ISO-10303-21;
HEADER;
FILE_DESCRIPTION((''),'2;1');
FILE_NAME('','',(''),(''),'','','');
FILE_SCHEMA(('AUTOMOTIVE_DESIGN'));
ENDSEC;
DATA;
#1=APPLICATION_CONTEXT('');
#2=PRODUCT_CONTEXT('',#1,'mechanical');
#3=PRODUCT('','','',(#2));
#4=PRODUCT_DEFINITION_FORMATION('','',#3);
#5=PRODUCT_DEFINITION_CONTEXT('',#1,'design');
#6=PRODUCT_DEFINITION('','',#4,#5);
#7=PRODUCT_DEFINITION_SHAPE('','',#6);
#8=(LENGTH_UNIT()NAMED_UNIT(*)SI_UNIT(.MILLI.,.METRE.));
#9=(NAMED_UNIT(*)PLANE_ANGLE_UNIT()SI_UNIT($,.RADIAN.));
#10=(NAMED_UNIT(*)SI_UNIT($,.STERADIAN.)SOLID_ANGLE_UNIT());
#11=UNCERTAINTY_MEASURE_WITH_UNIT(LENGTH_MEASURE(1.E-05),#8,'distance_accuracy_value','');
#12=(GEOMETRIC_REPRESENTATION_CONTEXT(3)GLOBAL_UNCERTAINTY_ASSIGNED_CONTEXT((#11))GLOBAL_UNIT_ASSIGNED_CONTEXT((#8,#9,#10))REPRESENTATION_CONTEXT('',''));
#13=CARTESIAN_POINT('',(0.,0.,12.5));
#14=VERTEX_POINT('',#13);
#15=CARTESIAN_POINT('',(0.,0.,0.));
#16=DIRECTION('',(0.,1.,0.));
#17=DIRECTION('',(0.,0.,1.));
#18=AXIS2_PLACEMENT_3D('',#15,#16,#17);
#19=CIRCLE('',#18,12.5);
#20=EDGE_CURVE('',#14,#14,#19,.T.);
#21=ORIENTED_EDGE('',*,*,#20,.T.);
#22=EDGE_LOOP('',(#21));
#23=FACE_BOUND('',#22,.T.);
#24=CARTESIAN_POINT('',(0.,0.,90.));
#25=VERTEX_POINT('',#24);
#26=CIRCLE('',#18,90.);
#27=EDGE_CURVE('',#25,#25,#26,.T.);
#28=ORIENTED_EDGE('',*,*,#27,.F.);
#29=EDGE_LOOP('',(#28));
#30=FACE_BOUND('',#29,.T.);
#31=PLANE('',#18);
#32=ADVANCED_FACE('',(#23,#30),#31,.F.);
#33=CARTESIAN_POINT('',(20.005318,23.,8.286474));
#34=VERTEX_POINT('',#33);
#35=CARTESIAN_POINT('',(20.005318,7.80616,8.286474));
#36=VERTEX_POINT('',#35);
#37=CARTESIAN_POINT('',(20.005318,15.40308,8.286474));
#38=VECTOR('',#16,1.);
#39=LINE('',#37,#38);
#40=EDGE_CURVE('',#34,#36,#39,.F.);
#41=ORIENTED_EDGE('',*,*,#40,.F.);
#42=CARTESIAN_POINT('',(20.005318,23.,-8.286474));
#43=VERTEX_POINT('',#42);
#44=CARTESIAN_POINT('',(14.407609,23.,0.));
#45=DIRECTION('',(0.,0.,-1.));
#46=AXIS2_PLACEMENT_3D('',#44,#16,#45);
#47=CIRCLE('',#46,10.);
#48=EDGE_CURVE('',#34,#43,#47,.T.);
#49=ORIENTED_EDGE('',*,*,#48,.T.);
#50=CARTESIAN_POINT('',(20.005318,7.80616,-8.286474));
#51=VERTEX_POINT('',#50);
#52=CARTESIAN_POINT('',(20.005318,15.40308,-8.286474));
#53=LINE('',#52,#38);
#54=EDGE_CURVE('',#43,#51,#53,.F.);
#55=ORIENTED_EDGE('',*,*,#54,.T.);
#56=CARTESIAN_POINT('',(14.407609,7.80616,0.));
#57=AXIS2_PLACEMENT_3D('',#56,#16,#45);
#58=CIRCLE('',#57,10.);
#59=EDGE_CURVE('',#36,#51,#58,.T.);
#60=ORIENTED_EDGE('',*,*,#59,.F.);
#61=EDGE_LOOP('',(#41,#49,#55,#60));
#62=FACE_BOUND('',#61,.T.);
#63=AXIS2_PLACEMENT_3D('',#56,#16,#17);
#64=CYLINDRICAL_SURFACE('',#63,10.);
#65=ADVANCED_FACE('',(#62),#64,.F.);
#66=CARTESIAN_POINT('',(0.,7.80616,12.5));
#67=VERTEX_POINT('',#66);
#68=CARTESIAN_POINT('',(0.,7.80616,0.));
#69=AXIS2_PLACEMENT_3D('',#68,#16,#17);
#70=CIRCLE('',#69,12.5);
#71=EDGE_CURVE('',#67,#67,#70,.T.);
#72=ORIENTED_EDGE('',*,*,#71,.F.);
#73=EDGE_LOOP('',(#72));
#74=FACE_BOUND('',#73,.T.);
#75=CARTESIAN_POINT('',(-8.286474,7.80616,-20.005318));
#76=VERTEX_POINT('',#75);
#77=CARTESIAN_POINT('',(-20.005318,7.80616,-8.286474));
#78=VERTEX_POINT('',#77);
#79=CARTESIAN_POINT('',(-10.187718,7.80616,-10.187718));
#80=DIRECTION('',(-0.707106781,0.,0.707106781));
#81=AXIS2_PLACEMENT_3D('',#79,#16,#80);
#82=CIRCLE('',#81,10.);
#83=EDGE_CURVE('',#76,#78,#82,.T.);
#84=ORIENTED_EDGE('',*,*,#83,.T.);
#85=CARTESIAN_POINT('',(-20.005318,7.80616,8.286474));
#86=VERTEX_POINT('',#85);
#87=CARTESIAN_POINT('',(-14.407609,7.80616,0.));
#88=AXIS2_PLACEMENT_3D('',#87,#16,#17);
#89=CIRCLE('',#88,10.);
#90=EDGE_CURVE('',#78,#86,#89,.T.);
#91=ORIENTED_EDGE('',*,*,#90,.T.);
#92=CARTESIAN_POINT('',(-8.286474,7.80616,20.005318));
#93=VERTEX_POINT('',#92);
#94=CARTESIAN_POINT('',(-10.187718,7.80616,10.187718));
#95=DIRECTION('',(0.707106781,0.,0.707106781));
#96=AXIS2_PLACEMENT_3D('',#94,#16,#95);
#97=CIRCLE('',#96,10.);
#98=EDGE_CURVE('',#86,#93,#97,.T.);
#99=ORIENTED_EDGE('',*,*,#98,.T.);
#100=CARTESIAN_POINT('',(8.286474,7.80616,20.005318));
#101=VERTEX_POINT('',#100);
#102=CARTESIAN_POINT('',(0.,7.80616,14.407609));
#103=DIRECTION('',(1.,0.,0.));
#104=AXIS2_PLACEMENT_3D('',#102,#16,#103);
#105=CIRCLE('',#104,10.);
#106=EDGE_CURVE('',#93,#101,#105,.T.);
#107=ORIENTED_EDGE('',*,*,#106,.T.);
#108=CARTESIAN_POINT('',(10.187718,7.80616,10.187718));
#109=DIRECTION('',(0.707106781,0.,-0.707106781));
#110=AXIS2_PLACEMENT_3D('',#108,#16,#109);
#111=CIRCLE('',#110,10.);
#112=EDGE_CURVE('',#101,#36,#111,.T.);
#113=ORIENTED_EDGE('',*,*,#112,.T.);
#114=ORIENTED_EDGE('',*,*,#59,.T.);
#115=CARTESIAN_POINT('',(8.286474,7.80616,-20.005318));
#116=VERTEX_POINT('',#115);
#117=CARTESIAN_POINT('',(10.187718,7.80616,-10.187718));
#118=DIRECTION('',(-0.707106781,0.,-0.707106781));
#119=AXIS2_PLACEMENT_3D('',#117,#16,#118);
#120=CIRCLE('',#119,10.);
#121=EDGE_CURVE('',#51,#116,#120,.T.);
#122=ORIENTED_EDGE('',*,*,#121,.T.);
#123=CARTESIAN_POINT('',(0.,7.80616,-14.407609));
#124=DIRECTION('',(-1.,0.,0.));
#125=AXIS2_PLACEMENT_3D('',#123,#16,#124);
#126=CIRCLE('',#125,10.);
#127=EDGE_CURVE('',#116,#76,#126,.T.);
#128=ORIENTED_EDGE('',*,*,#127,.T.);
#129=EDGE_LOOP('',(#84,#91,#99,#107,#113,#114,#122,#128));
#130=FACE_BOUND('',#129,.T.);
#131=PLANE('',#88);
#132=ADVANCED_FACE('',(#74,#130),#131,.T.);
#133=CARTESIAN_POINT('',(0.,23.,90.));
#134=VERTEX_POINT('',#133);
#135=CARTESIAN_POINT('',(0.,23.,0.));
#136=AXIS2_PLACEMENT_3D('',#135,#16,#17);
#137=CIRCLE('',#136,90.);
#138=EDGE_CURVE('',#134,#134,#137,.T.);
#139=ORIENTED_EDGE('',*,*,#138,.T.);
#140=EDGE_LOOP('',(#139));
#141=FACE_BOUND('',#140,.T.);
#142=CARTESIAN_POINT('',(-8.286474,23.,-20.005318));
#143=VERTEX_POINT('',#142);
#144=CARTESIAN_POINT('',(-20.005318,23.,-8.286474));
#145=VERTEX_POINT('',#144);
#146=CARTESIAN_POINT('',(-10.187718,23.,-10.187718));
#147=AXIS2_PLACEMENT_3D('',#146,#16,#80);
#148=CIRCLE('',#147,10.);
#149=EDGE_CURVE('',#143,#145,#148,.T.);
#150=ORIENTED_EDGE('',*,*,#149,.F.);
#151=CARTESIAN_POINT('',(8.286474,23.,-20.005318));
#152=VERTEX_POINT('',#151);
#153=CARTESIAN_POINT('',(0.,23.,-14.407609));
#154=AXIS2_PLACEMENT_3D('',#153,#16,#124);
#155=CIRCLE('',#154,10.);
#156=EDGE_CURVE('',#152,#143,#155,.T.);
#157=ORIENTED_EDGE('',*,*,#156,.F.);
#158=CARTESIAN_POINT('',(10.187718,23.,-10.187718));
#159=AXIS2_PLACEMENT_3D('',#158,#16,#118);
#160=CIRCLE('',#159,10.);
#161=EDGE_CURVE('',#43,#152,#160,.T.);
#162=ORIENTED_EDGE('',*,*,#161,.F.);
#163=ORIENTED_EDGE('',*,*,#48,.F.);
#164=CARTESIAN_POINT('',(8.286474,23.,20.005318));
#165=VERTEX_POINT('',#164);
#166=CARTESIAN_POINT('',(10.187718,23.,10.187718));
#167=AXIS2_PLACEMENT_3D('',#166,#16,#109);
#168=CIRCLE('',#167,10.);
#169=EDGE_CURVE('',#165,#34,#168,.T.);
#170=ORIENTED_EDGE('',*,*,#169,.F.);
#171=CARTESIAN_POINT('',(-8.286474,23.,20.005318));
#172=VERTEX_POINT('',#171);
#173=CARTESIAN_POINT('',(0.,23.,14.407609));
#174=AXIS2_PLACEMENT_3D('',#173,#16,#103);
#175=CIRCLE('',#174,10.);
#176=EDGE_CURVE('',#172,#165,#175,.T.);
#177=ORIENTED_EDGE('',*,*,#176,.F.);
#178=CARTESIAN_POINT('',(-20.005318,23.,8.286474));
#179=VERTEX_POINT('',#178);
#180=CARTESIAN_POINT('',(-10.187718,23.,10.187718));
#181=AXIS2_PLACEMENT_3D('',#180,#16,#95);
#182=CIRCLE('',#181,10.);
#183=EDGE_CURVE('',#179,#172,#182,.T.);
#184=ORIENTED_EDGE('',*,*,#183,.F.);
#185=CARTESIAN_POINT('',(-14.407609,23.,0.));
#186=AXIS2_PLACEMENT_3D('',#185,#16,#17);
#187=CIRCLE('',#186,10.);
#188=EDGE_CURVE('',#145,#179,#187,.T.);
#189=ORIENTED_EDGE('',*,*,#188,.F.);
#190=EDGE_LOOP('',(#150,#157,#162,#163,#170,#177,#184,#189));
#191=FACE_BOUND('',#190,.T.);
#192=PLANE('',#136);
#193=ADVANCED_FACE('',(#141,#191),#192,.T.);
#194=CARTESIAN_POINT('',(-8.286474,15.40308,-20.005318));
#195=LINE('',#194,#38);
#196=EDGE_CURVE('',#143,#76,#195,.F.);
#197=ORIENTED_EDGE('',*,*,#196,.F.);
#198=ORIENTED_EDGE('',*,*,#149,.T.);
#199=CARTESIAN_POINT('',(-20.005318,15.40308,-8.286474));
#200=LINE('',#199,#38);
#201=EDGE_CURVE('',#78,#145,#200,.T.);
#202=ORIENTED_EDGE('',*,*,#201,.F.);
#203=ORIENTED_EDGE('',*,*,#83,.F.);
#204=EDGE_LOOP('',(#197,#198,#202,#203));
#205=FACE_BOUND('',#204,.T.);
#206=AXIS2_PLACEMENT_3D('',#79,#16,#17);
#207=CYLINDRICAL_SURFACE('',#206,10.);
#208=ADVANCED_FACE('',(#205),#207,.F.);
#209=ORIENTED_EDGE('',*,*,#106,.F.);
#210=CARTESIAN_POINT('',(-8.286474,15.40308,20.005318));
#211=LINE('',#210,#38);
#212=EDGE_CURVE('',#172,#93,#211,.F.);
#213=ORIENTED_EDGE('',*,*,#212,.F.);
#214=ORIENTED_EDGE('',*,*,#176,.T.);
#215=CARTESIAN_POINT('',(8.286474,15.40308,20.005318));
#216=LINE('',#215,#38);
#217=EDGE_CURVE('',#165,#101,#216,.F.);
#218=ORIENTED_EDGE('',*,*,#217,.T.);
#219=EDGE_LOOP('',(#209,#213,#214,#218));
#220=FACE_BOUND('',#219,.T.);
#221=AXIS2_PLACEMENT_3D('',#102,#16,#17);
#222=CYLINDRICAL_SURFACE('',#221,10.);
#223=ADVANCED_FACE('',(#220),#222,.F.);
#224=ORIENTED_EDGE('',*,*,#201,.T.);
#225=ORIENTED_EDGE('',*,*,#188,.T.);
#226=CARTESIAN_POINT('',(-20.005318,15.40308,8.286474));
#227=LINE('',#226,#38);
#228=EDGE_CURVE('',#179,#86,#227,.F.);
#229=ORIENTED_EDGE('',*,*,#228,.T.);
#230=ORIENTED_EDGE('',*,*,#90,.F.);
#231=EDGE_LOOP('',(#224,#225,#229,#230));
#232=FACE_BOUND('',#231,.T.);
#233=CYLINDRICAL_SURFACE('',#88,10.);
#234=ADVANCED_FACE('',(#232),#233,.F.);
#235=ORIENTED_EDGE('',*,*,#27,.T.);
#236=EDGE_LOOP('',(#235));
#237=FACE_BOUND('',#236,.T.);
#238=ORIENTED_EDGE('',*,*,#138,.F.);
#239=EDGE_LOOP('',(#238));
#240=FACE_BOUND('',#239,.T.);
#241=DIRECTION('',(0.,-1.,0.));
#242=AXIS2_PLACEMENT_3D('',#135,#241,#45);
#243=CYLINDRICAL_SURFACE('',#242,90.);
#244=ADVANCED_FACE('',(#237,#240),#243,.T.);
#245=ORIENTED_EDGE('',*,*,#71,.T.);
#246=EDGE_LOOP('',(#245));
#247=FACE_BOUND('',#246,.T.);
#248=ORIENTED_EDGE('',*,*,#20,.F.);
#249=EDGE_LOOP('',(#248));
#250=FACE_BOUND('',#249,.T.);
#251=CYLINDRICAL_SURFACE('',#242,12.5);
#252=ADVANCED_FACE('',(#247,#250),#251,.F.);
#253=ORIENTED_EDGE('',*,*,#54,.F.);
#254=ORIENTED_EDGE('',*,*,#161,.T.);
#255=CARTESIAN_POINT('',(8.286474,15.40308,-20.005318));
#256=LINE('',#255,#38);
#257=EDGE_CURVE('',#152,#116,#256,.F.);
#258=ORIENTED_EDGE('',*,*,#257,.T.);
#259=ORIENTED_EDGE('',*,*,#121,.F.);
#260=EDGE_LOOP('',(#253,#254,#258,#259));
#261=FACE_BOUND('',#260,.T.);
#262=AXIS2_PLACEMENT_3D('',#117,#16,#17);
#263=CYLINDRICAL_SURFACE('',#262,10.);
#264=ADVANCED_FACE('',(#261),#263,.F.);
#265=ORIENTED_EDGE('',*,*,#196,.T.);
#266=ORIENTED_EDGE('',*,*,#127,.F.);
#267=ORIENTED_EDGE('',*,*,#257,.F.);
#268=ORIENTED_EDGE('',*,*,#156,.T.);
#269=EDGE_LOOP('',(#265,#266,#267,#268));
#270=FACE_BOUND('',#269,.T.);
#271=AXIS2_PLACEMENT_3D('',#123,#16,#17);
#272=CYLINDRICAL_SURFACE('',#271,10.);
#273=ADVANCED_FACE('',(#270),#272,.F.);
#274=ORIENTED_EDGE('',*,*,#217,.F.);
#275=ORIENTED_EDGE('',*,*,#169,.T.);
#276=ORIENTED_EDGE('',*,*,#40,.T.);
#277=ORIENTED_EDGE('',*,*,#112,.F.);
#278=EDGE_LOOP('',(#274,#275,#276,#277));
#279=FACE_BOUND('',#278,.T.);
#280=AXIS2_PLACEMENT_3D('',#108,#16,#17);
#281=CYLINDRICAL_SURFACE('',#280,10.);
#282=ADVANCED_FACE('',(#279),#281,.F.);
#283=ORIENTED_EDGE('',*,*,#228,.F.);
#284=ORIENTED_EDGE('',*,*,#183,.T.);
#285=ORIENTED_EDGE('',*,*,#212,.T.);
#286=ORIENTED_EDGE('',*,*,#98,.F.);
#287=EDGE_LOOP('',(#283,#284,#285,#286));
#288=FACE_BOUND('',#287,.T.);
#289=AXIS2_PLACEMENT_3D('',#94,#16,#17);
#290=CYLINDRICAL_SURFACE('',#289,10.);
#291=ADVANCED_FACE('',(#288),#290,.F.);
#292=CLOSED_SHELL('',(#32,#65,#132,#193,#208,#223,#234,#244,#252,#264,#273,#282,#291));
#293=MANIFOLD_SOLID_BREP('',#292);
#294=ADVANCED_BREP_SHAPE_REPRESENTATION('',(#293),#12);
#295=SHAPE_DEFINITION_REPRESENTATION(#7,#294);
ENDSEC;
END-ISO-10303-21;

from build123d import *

# Parameters (mm, degrees)
SKETCH1_R           = 90
BOSS_EXTRUDE1_DEPTH = 23
SKETCH2_R           = 12.5
CUT_EXTRUDE1_DEPTH  = 130.340635533
SKETCH3_R           = 10
CUT_EXTRUDE2_DEPTH  = 15.193840242
CIRPATTERN1_COUNT   = 8


with BuildPart() as part:
    # Sketch1 → Boss-Extrude1 (new body)
    with BuildSketch(Plane(origin=(0, 0, 0), x_dir=(1, 0, 0), z_dir=(0, 1, 0))):
        Circle(SKETCH1_R)
    extrude(amount=BOSS_EXTRUDE1_DEPTH)

    # Sketch2 → Cut-Extrude1 (cut, through all)
    with BuildSketch(Plane(origin=(0, 0, 0), x_dir=(1, 0, 0), z_dir=(0, 1, 0))):
        Circle(SKETCH2_R)
    extrude(amount=CUT_EXTRUDE1_DEPTH, mode=Mode.SUBTRACT)

    # Sketch3 → Cut-Extrude2 (cut)
    with BuildSketch(Plane(origin=(0, 23, 0), x_dir=(1, 0, 0), z_dir=(0, 1, 0))):
        with Locations((-14.407608976, 0)):
            Circle(SKETCH3_R)
    cut_extrude2 = extrude(amount=-CUT_EXTRUDE2_DEPTH, mode=Mode.SUBTRACT)

    # CirPattern1: Cut-Extrude2 ×8 about axis
    cirpattern1_axis = Axis((0, 0, 0), (0, 1, 0))
    for i in range(1, CIRPATTERN1_COUNT):
        add(cut_extrude2.rotate(cirpattern1_axis, i * 360 / CIRPATTERN1_COUNT), mode=Mode.SUBTRACT)


solid = part.part
